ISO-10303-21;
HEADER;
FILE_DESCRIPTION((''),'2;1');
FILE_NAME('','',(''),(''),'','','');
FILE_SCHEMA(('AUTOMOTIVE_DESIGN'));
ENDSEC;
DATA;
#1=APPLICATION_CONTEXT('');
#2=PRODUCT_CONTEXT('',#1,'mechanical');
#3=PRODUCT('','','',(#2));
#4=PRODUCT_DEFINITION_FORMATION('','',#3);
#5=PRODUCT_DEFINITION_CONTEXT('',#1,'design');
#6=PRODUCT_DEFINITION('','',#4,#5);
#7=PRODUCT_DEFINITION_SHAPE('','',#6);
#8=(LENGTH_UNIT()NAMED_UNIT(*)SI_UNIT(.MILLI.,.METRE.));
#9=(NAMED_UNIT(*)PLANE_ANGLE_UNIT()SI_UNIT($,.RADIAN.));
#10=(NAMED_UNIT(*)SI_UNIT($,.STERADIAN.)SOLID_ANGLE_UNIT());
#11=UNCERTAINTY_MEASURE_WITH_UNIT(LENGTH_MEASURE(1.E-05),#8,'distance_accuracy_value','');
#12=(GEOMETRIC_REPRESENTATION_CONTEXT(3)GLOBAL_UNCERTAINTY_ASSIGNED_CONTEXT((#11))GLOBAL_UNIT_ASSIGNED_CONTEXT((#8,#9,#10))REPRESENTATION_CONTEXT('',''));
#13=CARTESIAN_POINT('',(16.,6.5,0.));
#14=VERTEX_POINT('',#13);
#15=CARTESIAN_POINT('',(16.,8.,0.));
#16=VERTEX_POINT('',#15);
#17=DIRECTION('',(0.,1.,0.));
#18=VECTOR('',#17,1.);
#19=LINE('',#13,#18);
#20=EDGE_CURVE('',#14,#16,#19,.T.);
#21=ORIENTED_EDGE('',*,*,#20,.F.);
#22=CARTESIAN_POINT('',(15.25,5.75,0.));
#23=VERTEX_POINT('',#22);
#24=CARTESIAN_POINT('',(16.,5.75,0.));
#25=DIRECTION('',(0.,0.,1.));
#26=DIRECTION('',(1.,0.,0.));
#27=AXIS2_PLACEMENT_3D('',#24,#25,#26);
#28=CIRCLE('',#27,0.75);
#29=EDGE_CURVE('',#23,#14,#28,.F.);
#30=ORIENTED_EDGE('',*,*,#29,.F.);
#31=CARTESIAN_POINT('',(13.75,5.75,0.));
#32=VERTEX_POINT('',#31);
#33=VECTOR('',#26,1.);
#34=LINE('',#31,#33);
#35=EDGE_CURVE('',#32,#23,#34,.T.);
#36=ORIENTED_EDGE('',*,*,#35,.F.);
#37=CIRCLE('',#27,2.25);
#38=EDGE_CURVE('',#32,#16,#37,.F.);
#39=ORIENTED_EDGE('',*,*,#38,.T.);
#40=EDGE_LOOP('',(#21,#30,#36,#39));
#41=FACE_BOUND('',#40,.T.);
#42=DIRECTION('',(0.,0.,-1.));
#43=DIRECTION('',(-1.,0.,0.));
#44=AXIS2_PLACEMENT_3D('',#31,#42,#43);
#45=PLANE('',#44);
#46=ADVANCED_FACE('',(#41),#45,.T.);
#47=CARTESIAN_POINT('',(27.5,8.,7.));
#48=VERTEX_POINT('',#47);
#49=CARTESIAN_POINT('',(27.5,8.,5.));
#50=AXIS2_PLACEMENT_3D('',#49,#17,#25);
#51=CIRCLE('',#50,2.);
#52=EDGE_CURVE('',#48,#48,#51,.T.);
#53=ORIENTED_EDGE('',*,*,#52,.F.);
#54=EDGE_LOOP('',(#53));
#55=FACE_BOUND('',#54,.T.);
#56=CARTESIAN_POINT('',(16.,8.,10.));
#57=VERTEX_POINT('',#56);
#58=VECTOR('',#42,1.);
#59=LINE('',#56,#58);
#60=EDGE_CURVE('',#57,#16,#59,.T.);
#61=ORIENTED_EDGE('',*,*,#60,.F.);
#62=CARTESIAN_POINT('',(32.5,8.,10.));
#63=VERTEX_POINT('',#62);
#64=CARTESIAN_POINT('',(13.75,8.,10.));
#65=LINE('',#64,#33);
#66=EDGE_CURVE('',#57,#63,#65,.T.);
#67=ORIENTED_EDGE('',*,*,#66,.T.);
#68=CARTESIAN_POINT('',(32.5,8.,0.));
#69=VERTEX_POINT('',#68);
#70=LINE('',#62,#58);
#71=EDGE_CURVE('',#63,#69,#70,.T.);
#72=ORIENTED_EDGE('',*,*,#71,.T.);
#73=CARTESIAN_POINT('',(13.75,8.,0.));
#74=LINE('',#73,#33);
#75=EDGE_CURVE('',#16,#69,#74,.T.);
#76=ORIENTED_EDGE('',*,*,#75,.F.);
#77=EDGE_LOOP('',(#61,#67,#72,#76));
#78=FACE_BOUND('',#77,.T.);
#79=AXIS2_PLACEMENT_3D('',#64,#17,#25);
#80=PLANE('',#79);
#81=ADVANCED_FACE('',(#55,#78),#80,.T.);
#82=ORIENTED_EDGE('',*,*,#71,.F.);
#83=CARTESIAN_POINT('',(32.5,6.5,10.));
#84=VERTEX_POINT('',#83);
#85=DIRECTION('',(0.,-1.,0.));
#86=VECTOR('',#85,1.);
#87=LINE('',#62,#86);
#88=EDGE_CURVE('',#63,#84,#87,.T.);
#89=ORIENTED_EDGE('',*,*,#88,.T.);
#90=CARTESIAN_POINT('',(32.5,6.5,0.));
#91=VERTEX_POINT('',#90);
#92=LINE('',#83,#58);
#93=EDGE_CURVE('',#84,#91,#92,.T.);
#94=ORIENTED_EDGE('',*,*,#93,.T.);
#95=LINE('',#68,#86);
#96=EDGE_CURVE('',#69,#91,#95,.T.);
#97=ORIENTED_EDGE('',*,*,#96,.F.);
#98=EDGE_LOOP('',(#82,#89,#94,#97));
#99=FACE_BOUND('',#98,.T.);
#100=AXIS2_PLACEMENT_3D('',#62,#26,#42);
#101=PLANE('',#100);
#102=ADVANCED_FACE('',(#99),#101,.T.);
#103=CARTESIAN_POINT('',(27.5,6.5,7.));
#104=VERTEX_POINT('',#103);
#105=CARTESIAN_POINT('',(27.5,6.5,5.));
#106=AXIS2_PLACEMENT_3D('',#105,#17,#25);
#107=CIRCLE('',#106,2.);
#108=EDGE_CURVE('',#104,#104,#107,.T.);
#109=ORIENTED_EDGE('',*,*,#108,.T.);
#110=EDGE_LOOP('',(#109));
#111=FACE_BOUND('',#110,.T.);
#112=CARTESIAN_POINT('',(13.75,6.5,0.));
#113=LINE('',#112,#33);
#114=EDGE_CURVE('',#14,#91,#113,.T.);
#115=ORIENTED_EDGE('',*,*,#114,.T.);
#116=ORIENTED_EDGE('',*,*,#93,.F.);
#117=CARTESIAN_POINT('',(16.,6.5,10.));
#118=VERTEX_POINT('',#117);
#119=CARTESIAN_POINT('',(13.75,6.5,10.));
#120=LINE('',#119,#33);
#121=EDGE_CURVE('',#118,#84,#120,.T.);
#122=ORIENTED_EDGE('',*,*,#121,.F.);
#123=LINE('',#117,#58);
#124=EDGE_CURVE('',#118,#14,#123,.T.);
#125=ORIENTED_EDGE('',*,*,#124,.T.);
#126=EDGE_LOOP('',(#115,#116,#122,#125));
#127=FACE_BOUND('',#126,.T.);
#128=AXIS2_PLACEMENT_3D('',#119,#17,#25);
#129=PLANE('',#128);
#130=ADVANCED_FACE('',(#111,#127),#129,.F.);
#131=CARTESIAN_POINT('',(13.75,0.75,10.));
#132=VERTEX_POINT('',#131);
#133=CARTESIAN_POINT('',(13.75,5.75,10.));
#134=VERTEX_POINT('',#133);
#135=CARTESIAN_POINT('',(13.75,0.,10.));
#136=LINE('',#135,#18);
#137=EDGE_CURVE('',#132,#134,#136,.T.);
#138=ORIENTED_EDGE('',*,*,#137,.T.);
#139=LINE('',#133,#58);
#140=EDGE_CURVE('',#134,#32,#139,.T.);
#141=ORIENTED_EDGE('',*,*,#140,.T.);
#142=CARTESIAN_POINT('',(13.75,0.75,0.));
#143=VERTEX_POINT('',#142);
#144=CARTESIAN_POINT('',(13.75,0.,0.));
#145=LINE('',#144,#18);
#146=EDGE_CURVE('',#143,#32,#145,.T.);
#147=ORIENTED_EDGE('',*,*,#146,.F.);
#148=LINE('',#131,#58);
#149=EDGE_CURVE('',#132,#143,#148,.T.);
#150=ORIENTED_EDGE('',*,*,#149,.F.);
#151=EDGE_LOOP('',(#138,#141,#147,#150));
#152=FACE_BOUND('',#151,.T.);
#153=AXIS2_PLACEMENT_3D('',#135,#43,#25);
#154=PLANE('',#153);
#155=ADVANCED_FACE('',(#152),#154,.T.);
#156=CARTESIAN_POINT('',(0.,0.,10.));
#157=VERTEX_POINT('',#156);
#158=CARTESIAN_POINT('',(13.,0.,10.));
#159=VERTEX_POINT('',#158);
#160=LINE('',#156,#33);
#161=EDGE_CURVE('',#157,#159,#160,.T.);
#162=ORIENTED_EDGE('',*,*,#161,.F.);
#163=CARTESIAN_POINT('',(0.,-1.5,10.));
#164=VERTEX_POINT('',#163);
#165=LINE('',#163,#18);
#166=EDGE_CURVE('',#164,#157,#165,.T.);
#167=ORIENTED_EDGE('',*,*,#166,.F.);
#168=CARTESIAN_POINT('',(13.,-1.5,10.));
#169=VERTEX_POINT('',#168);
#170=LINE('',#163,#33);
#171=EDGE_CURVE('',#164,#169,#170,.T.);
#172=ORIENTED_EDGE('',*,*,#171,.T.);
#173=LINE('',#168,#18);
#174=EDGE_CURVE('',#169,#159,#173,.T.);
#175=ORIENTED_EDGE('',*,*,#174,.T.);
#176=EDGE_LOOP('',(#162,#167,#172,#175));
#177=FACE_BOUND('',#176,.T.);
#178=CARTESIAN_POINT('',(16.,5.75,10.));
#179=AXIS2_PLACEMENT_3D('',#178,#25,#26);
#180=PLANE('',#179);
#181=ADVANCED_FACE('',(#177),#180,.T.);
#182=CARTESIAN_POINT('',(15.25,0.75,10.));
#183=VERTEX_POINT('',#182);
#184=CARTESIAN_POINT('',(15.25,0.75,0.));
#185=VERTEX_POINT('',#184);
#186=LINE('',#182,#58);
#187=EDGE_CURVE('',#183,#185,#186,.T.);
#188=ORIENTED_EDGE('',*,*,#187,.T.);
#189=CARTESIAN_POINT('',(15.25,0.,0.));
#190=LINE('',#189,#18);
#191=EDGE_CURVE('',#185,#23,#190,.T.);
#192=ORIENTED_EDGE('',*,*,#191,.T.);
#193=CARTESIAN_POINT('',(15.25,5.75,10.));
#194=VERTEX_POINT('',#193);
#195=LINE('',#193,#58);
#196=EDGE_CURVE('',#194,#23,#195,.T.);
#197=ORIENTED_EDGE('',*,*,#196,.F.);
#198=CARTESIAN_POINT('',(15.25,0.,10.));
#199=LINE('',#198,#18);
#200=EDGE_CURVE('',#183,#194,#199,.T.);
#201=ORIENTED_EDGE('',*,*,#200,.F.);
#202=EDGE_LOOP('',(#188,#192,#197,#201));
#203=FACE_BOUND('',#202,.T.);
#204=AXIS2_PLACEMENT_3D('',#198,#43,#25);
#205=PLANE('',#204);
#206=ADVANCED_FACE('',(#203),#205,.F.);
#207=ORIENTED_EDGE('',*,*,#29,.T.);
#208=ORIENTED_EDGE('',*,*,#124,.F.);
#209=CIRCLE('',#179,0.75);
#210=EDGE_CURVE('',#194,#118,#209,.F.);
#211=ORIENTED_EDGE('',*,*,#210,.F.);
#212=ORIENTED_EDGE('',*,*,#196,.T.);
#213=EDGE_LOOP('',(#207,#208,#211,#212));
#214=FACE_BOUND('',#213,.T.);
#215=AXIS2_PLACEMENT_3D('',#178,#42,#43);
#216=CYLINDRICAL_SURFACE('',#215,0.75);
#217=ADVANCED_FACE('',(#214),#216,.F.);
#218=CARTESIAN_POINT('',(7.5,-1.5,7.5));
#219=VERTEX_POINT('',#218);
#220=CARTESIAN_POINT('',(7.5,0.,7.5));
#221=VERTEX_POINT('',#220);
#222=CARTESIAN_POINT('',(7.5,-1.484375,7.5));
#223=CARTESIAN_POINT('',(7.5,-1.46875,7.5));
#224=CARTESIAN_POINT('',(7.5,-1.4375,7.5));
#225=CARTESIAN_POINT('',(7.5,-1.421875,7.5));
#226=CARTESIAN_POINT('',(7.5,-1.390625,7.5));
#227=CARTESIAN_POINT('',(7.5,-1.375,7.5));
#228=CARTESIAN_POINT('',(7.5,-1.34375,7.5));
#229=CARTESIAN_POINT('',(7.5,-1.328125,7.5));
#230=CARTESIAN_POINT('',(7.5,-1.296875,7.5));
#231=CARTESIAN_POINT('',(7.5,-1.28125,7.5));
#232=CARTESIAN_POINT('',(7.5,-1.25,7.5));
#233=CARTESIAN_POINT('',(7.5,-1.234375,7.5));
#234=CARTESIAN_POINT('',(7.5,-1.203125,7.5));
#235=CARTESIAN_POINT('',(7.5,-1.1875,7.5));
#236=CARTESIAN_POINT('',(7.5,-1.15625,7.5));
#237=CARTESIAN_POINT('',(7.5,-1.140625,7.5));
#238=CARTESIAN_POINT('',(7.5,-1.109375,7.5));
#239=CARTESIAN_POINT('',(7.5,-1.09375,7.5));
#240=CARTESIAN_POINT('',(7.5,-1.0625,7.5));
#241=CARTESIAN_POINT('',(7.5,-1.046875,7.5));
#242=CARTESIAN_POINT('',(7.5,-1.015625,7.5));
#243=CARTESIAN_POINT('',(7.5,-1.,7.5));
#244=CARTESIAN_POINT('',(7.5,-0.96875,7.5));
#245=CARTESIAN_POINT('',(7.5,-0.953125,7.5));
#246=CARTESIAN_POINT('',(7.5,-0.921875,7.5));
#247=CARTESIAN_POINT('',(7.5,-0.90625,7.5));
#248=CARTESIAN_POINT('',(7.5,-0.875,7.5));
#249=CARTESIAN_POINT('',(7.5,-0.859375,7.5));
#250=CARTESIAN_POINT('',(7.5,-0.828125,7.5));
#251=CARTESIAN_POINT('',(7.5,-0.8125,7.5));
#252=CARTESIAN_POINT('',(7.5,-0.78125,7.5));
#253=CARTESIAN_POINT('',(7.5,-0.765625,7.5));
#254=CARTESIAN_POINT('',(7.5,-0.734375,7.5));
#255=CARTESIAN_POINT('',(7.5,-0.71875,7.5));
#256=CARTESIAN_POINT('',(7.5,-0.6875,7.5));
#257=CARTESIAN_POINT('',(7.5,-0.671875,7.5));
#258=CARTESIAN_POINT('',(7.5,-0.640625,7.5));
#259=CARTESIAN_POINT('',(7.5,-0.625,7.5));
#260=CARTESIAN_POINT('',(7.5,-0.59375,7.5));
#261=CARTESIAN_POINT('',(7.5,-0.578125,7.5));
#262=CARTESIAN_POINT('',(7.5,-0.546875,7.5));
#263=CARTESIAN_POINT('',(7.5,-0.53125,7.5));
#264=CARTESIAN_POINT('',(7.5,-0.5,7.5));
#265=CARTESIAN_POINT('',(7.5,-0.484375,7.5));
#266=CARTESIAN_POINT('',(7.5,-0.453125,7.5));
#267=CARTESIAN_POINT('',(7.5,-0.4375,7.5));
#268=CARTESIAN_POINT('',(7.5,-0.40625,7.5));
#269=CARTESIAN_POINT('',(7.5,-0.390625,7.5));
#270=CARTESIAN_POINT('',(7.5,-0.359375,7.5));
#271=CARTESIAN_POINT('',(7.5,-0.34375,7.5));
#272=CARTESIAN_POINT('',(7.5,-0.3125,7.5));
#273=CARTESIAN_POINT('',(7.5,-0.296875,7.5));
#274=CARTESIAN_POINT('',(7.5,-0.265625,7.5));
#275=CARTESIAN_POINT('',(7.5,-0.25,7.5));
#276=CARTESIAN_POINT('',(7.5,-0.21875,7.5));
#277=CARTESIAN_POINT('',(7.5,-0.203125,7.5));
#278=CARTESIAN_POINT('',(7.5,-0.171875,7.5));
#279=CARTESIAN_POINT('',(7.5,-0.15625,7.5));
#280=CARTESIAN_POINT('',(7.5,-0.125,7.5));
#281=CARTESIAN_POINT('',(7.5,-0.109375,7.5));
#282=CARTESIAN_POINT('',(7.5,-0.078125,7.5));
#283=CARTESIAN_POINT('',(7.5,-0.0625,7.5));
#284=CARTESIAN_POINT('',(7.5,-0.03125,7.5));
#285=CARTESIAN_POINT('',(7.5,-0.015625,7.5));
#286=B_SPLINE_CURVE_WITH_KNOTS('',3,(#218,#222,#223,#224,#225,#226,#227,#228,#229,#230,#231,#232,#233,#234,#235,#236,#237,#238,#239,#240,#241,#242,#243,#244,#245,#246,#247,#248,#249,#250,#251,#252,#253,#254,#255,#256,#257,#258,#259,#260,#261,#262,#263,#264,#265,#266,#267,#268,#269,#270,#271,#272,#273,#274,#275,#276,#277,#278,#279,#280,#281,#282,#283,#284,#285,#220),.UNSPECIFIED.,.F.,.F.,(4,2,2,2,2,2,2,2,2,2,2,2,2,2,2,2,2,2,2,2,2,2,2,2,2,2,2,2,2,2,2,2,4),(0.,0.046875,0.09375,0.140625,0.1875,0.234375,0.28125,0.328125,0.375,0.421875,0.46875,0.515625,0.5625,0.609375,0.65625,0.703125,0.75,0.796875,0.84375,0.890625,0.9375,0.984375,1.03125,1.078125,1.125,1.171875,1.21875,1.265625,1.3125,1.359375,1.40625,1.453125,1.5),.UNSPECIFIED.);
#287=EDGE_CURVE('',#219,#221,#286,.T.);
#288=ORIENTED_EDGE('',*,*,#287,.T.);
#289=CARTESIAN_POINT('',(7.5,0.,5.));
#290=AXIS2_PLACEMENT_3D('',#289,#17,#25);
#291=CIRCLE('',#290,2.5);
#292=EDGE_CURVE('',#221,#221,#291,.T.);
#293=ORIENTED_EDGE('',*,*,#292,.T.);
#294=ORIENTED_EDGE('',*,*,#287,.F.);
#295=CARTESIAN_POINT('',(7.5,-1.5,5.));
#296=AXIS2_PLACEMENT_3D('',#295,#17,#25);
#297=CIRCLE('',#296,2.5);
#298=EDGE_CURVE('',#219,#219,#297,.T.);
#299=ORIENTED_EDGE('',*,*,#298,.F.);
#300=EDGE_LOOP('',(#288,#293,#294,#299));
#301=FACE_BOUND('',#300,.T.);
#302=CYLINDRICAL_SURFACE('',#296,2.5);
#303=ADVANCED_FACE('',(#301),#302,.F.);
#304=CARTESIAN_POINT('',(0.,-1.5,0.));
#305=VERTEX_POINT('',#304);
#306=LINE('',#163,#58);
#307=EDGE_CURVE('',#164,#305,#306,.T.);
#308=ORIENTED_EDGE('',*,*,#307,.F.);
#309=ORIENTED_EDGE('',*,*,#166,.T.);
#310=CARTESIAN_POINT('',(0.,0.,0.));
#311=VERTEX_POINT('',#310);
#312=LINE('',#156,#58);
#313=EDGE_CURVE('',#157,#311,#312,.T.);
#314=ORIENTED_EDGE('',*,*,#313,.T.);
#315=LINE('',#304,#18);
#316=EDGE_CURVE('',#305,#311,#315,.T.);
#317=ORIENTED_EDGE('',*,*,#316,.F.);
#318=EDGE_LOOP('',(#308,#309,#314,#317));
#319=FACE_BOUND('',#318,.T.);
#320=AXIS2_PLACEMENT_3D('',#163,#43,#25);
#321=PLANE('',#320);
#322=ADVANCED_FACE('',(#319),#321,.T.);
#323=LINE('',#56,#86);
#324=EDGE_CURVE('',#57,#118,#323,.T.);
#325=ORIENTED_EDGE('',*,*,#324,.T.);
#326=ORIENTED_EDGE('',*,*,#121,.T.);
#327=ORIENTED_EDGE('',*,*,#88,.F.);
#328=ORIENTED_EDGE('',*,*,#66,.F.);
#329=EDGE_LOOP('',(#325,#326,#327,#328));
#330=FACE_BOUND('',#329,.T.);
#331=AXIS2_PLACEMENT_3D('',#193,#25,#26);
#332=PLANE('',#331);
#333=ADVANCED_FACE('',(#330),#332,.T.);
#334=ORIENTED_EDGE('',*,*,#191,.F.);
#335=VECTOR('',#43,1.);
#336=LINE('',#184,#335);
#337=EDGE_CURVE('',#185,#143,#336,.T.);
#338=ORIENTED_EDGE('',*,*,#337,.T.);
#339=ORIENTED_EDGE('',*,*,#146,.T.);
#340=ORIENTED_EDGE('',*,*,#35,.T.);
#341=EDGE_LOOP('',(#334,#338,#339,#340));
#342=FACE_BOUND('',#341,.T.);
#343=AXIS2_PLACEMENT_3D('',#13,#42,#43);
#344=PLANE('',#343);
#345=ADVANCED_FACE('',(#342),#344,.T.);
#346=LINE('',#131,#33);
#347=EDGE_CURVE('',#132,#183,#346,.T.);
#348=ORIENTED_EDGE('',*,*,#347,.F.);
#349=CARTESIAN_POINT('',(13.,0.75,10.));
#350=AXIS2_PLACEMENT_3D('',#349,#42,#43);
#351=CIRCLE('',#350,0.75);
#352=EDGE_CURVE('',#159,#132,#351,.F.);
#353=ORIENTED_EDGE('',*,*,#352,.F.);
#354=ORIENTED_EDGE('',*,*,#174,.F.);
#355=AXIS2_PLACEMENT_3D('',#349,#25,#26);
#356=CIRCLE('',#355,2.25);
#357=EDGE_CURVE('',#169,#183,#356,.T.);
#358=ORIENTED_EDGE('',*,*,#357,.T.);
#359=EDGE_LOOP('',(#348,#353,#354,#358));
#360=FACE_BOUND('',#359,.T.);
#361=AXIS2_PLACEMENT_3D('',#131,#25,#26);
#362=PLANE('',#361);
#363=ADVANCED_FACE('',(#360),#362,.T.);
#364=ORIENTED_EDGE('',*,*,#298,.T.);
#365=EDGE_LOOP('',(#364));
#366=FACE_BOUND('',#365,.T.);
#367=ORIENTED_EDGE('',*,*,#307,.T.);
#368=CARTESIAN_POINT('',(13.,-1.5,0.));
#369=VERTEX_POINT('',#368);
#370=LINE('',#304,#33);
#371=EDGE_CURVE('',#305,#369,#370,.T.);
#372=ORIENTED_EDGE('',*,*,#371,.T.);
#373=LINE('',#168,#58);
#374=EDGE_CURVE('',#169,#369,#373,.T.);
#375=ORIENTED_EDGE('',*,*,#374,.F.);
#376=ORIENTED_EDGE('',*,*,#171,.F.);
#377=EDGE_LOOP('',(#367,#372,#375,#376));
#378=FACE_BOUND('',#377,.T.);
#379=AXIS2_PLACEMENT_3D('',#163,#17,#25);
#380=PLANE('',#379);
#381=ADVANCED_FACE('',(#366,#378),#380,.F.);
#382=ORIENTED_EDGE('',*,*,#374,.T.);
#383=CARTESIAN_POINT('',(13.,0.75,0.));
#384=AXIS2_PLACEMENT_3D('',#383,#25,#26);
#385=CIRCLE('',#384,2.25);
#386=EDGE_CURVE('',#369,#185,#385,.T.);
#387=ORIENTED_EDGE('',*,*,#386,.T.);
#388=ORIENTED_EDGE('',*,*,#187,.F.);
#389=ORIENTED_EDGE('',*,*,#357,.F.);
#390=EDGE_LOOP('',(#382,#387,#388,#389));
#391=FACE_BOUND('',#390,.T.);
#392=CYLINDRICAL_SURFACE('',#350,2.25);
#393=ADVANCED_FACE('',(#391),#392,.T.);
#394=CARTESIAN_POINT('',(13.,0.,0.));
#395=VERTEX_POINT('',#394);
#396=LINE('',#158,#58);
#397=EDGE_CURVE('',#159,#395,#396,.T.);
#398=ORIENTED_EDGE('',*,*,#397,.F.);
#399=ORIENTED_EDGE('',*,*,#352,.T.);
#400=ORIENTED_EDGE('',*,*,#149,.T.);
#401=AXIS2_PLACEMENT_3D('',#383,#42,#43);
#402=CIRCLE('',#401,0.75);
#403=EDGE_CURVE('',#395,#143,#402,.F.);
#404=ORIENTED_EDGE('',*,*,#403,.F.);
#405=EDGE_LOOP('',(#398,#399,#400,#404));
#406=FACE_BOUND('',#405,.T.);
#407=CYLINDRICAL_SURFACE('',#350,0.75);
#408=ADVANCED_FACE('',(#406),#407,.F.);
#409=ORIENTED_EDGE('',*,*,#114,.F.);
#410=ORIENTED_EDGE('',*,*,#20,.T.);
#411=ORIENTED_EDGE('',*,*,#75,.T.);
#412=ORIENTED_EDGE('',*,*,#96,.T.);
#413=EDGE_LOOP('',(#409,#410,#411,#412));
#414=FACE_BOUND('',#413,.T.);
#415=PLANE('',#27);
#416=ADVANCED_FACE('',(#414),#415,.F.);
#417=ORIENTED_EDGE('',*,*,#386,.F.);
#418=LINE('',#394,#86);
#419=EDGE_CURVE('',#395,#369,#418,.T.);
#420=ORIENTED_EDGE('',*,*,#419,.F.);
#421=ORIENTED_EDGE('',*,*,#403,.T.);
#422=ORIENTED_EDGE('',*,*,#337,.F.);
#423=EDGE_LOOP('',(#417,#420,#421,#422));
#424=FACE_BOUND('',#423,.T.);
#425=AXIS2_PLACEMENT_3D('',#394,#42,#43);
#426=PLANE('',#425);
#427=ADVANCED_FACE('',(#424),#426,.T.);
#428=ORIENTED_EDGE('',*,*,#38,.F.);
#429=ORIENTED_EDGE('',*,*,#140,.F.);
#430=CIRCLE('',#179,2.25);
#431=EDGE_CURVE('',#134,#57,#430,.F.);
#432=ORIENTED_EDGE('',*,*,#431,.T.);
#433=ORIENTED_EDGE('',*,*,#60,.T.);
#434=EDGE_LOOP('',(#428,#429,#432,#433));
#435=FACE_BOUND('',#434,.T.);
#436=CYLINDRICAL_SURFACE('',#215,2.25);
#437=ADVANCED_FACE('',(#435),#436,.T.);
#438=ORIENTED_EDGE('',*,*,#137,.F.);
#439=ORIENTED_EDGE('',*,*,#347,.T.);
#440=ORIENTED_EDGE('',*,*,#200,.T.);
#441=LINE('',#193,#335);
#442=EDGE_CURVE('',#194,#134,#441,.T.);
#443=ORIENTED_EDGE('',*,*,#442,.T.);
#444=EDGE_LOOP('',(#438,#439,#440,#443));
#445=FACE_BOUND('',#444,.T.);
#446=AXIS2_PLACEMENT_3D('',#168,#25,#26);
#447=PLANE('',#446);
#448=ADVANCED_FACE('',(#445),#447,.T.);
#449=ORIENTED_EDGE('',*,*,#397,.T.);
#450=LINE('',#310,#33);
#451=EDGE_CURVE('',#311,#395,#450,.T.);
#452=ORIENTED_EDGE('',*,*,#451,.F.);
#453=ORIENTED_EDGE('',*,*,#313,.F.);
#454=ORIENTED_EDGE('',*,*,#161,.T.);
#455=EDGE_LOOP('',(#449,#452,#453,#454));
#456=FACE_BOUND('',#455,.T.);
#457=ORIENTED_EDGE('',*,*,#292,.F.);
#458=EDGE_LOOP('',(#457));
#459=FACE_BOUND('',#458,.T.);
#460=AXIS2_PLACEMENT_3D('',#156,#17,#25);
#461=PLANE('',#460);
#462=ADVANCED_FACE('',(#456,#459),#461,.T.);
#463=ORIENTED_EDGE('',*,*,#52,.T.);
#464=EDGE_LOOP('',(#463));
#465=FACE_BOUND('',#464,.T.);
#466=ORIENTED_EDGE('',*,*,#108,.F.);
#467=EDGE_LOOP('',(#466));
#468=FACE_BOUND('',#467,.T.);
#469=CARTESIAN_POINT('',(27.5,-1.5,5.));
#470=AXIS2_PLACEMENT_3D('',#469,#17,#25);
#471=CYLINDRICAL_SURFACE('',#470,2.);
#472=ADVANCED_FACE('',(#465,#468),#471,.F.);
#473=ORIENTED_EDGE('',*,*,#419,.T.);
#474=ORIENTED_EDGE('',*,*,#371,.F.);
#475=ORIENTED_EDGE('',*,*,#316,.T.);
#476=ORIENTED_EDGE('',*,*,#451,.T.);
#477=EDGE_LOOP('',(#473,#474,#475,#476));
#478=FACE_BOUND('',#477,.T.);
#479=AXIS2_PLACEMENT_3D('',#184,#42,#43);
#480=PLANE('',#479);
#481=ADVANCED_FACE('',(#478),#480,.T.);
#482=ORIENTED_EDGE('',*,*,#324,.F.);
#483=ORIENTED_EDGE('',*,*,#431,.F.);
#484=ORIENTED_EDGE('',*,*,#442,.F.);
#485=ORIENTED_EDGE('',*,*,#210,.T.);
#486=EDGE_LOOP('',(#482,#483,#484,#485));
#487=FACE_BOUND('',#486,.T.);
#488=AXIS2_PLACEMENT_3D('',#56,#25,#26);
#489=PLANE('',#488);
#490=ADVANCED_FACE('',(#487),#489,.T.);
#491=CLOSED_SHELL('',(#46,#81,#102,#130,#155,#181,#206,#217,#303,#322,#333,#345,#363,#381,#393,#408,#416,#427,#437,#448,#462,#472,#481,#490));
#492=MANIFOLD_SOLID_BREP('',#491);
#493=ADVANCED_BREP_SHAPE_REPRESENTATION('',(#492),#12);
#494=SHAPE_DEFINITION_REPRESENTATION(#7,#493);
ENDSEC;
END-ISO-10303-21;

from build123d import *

# Parameters (mm, degrees)
BASE_FLANGE1_DEPTH = 10
SKETCH6_R          = 2.5
CUT_EXTRUDE1_DEPTH = 35.932076949
SKETCH7_R          = 2
CUT_EXTRUDE2_DEPTH = 36.305806888


# Sheet-metal steps are written as plain solids
with BuildPart() as part:
    # Sketch1 → Base-Flange1 (new body)
    with BuildSketch(Plane.XY):
        with BuildLine():
            Line((0, 0), (13, 0))
            ThreePointArc((13, 0), (13.530330086, 0.219669914), (13.75, 0.75))
            Line((13.75, 0.75), (13.75, 5.75))
            ThreePointArc((13.75, 5.75), (14.409009742, 7.340990258), (16, 8))
            Line((16, 8), (32.5, 8))
            Line((32.5, 8), (32.5, 6.5))
            Line((32.5, 6.5), (16, 6.5))
            ThreePointArc((16, 6.5), (15.469669914, 6.280330086), (15.25, 5.75))
            Line((15.25, 5.75), (15.25, 0.75))
            ThreePointArc((15.25, 0.75), (14.590990258, -0.840990258), (13, -1.5))
            Line((13, -1.5), (0, -1.5))
            Line((0, -1.5), (0, 0))
        make_face()
    extrude(amount=BASE_FLANGE1_DEPTH)

    # Sketch6 → Cut-Extrude1 (cut, through all)
    with BuildSketch(Plane(origin=(0, 0, 0), x_dir=(1, 0, 0), z_dir=(0, 1, 0))):
        with Locations(Location((7.5, -5, 0), (0, 0, 270))):
            Circle(SKETCH6_R)
    extrude(amount=-CUT_EXTRUDE1_DEPTH, mode=Mode.SUBTRACT)

    # Sketch7 → Cut-Extrude2 (cut, through all)
    with BuildSketch(Plane(origin=(0, 8, 0), x_dir=(1, 0, 0), z_dir=(0, 1, 0))):
        with Locations(Location((27.5, -5, 0), (0, 0, 270))):
            Circle(SKETCH7_R)
    extrude(amount=-CUT_EXTRUDE2_DEPTH, mode=Mode.SUBTRACT)


solid = part.part
